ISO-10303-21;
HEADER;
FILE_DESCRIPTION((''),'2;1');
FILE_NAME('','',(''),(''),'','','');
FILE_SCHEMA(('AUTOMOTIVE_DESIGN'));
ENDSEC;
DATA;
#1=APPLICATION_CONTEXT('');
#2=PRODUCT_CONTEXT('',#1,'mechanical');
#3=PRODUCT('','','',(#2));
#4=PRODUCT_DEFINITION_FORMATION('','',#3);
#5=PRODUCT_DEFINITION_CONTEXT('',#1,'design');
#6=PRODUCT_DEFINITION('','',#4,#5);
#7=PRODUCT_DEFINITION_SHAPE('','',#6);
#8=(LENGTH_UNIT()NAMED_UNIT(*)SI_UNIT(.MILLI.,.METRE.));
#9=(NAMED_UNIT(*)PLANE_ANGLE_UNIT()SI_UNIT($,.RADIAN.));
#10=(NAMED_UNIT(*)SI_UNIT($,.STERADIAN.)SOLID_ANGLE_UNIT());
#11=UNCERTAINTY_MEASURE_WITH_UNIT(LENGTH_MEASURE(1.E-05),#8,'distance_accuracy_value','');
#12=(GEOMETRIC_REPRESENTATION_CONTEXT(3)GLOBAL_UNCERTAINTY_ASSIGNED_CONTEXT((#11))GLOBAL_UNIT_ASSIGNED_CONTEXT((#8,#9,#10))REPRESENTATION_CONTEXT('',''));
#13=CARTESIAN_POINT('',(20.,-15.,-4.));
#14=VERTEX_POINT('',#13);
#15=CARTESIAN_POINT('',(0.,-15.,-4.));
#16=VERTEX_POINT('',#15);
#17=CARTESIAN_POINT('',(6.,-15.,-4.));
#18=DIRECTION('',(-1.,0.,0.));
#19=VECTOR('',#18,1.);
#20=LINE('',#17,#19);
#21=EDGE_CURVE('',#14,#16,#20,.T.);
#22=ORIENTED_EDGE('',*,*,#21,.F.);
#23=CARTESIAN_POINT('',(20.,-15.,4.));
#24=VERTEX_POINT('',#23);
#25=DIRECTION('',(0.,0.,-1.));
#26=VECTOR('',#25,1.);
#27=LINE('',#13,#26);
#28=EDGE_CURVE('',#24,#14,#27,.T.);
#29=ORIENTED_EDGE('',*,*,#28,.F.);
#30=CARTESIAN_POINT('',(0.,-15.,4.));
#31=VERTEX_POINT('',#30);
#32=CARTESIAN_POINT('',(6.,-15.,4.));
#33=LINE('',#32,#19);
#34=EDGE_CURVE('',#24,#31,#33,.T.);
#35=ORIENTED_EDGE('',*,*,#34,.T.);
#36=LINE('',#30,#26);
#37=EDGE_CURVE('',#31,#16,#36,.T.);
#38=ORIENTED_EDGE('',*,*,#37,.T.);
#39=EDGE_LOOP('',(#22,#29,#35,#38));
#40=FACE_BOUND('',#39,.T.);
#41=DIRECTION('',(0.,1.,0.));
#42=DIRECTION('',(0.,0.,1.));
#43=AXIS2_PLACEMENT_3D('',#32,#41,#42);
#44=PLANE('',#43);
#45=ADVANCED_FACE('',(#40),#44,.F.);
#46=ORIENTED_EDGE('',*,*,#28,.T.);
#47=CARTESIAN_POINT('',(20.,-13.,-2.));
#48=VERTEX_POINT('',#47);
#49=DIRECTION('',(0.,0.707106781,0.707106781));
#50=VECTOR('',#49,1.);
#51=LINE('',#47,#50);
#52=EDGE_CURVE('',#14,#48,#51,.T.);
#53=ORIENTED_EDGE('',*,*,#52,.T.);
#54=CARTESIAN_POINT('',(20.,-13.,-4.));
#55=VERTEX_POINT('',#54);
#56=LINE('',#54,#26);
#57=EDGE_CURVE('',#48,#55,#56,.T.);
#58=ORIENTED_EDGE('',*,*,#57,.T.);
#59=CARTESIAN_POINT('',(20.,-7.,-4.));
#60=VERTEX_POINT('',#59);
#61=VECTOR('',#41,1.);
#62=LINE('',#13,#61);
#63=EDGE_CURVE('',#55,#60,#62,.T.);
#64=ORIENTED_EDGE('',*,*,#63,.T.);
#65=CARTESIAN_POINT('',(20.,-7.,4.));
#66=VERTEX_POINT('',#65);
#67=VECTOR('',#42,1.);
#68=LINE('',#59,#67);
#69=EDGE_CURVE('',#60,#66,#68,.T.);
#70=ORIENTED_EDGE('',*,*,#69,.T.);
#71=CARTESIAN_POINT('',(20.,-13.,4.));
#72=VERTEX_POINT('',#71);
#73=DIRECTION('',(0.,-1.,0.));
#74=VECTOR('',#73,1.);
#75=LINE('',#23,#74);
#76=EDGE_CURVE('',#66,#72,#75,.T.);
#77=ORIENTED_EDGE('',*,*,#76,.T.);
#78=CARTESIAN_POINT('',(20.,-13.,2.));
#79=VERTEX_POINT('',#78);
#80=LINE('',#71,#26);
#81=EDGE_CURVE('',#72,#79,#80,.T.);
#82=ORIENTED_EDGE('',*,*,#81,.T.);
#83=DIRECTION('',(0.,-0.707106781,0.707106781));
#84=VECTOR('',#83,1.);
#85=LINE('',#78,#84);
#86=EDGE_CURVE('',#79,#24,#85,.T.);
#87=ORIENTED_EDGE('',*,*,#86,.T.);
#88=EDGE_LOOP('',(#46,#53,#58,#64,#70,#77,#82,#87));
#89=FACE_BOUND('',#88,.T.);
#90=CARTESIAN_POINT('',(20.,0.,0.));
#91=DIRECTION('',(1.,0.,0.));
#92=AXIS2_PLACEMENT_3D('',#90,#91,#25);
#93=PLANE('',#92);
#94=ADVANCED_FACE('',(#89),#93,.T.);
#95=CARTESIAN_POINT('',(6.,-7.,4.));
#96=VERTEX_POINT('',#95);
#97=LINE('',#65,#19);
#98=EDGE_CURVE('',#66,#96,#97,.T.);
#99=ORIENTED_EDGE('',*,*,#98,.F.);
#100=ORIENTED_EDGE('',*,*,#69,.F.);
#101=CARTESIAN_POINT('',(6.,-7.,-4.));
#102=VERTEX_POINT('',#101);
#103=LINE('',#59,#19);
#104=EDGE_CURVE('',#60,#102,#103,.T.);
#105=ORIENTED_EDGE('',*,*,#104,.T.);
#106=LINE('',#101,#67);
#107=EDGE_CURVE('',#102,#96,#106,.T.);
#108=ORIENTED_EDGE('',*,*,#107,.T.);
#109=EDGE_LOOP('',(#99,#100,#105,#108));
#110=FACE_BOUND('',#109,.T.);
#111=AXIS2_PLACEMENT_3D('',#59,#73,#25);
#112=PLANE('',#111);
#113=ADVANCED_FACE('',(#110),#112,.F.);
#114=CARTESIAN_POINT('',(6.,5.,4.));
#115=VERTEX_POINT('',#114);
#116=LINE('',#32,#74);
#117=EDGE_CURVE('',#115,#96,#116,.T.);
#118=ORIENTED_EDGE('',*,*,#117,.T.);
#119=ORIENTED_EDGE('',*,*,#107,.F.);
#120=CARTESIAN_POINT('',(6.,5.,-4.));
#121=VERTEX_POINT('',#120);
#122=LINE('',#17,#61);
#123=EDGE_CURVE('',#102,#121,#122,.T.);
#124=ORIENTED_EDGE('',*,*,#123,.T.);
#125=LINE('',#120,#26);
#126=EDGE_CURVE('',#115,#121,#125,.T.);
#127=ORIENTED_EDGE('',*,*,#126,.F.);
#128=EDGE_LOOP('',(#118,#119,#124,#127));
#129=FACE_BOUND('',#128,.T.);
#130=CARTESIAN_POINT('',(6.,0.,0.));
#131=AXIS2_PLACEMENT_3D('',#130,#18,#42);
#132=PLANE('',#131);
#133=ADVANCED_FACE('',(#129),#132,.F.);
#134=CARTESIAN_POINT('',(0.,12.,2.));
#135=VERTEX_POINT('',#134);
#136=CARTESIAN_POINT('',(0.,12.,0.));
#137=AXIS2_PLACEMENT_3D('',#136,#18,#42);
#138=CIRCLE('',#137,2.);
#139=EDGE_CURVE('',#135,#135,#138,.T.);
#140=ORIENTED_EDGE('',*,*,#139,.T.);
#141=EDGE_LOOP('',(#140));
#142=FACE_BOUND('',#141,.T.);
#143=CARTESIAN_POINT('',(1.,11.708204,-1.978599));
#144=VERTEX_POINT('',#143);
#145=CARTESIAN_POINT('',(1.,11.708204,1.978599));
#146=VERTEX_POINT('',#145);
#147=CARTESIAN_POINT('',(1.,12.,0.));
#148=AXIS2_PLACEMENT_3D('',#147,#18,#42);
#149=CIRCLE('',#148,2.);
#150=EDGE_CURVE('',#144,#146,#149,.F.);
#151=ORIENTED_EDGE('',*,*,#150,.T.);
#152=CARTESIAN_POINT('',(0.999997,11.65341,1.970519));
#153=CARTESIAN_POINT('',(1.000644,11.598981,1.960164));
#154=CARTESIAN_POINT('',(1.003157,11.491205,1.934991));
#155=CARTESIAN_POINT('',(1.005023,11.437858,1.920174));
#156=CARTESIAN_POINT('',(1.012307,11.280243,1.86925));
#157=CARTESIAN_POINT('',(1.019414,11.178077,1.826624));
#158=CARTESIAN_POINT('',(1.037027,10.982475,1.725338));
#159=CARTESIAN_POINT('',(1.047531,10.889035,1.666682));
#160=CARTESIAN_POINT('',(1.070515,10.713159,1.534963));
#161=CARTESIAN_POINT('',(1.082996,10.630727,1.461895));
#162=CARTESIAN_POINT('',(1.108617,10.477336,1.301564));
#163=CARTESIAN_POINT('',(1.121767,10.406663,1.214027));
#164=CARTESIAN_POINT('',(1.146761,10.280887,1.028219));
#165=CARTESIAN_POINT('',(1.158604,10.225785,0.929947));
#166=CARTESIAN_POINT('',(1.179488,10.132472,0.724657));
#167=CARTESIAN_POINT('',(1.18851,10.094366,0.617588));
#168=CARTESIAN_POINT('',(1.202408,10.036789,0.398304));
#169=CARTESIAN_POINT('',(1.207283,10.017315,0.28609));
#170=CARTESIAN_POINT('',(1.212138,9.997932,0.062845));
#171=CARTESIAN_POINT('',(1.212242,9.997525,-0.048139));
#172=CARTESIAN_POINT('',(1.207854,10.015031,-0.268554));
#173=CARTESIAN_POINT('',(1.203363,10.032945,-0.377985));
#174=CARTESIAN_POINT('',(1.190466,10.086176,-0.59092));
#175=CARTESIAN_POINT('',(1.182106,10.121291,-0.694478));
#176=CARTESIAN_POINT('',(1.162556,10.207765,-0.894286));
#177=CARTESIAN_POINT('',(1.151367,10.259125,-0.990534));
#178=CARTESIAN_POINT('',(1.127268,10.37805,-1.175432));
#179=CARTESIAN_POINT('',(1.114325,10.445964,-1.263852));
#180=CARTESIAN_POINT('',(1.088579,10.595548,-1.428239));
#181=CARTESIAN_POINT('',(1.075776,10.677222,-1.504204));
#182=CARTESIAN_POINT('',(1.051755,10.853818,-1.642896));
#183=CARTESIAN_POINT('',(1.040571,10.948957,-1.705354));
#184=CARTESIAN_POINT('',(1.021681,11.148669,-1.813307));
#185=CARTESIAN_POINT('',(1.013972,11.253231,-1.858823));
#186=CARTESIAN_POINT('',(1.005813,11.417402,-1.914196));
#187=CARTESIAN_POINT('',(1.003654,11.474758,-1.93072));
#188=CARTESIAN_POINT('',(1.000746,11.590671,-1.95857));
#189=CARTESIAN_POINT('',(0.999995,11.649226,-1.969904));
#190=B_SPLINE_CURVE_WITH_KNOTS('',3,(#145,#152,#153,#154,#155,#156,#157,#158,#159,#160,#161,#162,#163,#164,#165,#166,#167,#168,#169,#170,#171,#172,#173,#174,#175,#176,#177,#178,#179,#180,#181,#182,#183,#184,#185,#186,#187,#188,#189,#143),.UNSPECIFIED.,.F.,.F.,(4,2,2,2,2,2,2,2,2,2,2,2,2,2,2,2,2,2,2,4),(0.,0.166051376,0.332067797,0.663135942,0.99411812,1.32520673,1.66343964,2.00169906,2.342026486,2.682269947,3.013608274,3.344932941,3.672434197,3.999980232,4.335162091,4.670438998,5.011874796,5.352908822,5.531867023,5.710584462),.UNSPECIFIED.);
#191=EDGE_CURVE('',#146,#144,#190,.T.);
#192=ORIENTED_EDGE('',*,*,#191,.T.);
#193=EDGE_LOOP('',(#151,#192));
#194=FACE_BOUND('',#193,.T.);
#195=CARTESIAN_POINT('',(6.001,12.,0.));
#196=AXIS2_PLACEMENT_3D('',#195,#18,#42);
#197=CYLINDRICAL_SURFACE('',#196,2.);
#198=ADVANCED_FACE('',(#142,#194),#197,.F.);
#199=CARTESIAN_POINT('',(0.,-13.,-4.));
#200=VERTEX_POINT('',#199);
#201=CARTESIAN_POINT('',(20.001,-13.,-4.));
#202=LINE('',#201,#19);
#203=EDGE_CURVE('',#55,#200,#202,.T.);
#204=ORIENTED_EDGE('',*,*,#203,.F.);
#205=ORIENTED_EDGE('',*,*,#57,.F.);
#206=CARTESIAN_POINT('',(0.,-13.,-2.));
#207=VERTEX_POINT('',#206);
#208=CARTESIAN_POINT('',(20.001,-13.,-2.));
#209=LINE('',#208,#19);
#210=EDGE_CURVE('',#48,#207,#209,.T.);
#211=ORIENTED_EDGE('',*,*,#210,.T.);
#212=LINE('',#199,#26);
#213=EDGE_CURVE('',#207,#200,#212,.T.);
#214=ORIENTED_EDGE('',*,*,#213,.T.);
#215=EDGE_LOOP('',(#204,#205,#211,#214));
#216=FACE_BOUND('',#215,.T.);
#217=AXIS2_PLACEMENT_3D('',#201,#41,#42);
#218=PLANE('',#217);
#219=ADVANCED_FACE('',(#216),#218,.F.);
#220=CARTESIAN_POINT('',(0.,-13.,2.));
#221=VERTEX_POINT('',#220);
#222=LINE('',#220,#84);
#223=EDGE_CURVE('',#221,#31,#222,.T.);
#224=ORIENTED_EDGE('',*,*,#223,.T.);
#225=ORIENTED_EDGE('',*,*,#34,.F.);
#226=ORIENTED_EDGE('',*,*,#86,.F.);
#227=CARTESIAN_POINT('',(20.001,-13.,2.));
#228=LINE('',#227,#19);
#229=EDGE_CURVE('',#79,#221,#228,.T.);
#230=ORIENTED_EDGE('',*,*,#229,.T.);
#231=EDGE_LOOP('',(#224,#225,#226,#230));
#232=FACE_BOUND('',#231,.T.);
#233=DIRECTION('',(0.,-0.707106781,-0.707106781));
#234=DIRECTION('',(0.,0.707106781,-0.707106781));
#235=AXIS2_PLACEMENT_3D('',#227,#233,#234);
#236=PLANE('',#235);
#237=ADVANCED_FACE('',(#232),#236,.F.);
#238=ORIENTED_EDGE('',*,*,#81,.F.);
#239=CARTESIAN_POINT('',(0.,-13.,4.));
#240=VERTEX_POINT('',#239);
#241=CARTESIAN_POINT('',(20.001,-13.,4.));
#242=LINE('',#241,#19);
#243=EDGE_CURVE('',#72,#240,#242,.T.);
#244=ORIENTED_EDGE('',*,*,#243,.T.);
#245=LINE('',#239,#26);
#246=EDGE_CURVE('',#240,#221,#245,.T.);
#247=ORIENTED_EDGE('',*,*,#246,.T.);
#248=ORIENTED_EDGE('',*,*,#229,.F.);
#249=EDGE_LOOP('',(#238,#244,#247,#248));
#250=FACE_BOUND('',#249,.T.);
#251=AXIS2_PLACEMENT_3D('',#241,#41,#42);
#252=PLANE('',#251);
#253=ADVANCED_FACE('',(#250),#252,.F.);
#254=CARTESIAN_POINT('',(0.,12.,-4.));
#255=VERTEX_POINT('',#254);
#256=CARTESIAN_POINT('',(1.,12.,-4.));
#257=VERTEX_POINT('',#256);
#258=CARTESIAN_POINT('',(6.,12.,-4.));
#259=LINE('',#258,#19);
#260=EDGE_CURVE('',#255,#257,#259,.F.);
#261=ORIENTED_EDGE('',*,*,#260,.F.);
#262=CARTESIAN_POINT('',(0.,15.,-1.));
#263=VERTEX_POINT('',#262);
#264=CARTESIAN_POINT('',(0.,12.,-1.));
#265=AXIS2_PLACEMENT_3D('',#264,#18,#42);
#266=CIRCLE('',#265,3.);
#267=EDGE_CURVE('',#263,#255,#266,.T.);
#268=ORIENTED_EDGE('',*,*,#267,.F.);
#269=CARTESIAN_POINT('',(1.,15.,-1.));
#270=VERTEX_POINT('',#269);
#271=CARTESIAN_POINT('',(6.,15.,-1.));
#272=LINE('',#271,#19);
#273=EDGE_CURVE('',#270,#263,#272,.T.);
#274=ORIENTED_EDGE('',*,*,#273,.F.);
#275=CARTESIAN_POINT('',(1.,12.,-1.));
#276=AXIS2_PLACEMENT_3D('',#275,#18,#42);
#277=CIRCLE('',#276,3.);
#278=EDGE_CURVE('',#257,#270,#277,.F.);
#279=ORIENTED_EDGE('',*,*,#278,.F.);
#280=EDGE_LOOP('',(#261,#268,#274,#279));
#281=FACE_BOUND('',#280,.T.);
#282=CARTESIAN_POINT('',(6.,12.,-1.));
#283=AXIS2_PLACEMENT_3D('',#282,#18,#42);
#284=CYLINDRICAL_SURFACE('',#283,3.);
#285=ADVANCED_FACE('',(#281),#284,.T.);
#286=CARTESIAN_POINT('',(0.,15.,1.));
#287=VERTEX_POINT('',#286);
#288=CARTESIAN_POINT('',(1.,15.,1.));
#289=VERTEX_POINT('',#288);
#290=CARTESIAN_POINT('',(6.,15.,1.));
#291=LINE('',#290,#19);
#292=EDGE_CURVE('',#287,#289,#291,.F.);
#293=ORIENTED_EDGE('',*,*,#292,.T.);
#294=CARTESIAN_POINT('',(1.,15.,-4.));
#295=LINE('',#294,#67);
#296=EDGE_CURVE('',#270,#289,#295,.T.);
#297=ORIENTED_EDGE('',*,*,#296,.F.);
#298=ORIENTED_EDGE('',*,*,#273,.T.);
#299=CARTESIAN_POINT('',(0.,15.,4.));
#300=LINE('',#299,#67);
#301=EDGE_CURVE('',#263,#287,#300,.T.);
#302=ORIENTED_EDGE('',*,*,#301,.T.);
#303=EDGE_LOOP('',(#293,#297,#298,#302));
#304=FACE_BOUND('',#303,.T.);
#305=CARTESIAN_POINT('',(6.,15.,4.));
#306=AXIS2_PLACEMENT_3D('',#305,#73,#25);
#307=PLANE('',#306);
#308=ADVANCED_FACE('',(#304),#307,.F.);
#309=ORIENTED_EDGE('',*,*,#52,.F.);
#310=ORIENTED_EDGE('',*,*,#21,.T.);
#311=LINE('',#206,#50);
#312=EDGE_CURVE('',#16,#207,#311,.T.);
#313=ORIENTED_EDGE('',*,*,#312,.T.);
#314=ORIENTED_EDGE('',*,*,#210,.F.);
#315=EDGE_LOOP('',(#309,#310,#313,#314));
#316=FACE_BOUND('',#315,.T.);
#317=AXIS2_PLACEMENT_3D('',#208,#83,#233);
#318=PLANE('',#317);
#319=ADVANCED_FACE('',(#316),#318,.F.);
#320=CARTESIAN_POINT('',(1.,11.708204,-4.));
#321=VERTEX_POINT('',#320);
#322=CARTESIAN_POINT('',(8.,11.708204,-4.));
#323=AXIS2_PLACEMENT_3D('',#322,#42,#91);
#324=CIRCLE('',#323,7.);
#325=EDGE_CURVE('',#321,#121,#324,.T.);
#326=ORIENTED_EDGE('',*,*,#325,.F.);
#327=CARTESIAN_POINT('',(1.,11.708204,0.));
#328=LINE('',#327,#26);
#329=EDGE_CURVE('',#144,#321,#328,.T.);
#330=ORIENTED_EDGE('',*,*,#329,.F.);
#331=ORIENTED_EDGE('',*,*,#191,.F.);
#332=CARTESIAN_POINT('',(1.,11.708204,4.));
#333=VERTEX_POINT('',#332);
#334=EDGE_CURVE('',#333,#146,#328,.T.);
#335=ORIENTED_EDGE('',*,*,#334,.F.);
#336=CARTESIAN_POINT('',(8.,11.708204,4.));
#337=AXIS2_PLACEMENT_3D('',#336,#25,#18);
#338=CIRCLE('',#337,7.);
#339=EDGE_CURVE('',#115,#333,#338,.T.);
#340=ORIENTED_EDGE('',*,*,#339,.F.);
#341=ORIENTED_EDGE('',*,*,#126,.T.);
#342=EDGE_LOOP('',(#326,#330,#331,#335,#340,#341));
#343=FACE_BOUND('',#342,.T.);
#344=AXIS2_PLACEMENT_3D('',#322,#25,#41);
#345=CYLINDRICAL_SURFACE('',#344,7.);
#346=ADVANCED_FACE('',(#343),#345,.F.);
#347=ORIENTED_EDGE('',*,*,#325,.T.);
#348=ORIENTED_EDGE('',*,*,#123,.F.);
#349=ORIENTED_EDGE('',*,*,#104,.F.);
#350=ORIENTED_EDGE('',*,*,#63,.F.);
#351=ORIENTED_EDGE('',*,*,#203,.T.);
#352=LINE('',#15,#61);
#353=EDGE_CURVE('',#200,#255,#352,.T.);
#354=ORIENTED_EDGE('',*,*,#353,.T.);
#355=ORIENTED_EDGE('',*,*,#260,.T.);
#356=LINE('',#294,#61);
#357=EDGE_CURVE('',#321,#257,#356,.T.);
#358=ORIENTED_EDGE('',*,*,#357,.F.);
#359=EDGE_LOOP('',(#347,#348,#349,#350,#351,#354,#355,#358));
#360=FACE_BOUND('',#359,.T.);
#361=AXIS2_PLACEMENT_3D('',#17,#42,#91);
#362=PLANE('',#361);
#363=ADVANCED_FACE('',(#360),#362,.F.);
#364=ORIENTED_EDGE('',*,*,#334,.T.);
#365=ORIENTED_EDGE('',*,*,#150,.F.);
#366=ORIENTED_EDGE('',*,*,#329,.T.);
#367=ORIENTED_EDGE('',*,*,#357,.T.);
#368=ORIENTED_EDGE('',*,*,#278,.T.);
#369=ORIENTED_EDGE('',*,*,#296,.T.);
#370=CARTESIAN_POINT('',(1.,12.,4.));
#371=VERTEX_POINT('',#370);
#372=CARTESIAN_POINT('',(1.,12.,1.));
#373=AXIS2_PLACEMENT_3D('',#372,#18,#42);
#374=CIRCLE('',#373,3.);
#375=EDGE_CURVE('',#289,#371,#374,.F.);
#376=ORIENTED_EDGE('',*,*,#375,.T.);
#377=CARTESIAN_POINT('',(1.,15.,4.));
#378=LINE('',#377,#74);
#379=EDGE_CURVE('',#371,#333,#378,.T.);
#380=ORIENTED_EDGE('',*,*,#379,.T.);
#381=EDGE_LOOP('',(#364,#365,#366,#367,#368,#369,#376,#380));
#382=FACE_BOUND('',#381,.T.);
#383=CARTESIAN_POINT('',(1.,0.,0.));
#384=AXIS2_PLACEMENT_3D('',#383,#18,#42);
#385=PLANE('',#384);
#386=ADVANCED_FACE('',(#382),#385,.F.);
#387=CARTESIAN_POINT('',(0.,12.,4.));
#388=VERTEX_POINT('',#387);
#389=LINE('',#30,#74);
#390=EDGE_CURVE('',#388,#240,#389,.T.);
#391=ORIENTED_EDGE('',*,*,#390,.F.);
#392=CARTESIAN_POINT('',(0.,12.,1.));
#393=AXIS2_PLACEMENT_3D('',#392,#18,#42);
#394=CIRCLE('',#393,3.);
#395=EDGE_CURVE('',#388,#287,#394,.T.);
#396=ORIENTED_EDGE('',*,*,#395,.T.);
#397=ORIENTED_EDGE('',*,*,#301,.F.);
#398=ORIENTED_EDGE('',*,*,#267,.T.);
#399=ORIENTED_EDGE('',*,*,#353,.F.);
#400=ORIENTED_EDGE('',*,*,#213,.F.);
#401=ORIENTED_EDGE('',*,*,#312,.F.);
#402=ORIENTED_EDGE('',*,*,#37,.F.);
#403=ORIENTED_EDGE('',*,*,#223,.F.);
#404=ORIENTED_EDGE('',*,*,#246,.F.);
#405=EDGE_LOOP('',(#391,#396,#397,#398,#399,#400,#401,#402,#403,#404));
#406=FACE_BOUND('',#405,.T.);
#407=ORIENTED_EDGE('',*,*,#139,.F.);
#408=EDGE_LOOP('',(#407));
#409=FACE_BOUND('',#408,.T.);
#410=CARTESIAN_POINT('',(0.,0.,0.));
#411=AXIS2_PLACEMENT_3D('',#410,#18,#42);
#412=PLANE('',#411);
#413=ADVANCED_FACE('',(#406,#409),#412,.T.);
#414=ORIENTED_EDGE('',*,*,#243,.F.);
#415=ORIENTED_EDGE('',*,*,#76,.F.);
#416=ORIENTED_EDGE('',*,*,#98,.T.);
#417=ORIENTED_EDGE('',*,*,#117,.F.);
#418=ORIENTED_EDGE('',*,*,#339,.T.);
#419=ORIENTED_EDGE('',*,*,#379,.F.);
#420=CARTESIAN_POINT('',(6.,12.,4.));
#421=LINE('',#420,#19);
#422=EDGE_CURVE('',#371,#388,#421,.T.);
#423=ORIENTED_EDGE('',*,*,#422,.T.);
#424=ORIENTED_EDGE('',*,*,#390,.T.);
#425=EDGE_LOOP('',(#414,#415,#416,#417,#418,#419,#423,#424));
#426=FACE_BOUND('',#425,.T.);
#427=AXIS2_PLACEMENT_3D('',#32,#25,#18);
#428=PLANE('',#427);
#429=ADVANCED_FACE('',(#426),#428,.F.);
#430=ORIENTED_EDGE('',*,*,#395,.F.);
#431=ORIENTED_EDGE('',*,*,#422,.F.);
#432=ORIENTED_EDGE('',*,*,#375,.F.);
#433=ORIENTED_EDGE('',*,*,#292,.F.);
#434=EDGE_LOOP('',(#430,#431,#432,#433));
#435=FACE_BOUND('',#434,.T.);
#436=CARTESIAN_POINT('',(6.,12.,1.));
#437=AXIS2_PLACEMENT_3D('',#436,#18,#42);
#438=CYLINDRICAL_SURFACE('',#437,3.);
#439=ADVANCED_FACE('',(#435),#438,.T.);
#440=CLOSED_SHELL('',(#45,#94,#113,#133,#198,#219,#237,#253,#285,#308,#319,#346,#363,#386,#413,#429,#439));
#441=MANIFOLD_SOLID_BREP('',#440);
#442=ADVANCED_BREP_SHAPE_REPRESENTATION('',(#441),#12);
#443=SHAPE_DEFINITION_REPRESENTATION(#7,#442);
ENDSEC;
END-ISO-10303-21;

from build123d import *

# Parameters (mm, degrees)
SKETCH1_W           = 8
SKETCH1_H           = 30
BOSS_EXTRUDE1_DEPTH = 6
SKETCH2_W           = 8
SKETCH2_H           = 10
CUT_EXTRUDE1_DEPTH  = 5
CUT_EXTRUDE2_REACH  = 18.643
SKETCH3_R           = 2
FILLET1_R           = 3
FILLET2_R           = 7
SKETCH4_W           = 8
SKETCH4_H           = 8
BOSS_EXTRUDE2_DEPTH = 14
CUT_EXTRUDE4_REACH  = 27.318


with BuildPart() as part:
    # Sketch1 → Boss-Extrude1 (new body)
    with BuildSketch(Plane(origin=(0, 0, 0), x_dir=(0, 0, -1), z_dir=(1, 0, 0))):
        Rectangle(SKETCH1_W, SKETCH1_H)
    extrude(amount=BOSS_EXTRUDE1_DEPTH)

    # Sketch2 → Cut-Extrude1 (cut)
    with BuildSketch(Plane(origin=(6, 0, 0), x_dir=(0, 0, -1), z_dir=(1, 0, 0))):
        with Locations((0, 10)):
            Rectangle(SKETCH2_W, SKETCH2_H)
    extrude(amount=-CUT_EXTRUDE1_DEPTH, mode=Mode.SUBTRACT)

    # Sketch3 → Cut-Extrude2 (cut, up to next)
    with BuildSketch(Plane.ZY, mode=Mode.PRIVATE) as cut_extrude2_sk1:
        with Locations((0, 12)):
            Circle(SKETCH3_R)
    cut_extrude2_tool1 = extrude(cut_extrude2_sk1.sketch, amount=-CUT_EXTRUDE2_REACH, mode=Mode.PRIVATE) & part.part
    add(cut_extrude2_tool1.solids().sort_by_distance((0, 12, 0))[0], mode=Mode.SUBTRACT)

    # Fillet1
    fillet1_edges = [part.edges().sort_by_distance(p)[0] for p in [
        (0.5, 15, 4),
        (0.5, 15, -4),
    ]]
    fillet(fillet1_edges, radius=FILLET1_R)

    # Fillet2
    # the kernel refuses this fillet: 7 mm, written as the material it adds along each edge
    with BuildSketch(Plane(origin=(1, 5, 4), x_dir=(0, 1, 0), z_dir=(0, 0, -1))) as fillet2_piece_1_section:
        with BuildLine():
            CenterArc((6.708203932, 7), FILLET2_R, 196.601549599, 73.398450401)
            Line((0, 5), (0, 0))
            Line((0, 0), (6.708203932, 0))
        make_face()
    fillet2_piece_1 = extrude(amount=8, mode=Mode.PRIVATE)
    fillet2_piece_1 = fillet2_piece_1 - Plane(origin=(1, 12, 0), x_dir=(0, 0, 1), z_dir=(-1, 0, 0)) * Cylinder(2, 43, mode=Mode.PRIVATE)
    add(fillet2_piece_1)

    # Sketch4 → Boss-Extrude2 (add)
    with BuildSketch(Plane(origin=(6, 0, 0), x_dir=(0, 0, -1), z_dir=(1, 0, 0))):
        with Locations((0, -11)):
            Rectangle(SKETCH4_W, SKETCH4_H)
    extrude(amount=BOSS_EXTRUDE2_DEPTH)

    # Sketch6 → Cut-Extrude4 (cut, up to next)
    with BuildSketch(Plane.ZY, mode=Mode.PRIVATE) as cut_extrude4_sk1:
        Polygon((4, -15), (4, -13), (2, -13), align=None)
    cut_extrude4_tool1 = extrude(cut_extrude4_sk1.sketch, amount=-CUT_EXTRUDE4_REACH, mode=Mode.PRIVATE) & part.part
    # Sketch6 → Cut-Extrude4 (cut, up to next)
    with BuildSketch(Plane.ZY, mode=Mode.PRIVATE) as cut_extrude4_sk2:
        Polygon((-4, -15), (-4, -13), (-2, -13), align=None)
    cut_extrude4_tool2 = extrude(cut_extrude4_sk2.sketch, amount=-CUT_EXTRUDE4_REACH, mode=Mode.PRIVATE) & part.part
    add(cut_extrude4_tool1.solids().sort_by_distance((0, -13.666667, 3.333333))[0], mode=Mode.SUBTRACT)
    add(cut_extrude4_tool2.solids().sort_by_distance((0, -13.666667, -3.333333))[0], mode=Mode.SUBTRACT)


solid = part.part
